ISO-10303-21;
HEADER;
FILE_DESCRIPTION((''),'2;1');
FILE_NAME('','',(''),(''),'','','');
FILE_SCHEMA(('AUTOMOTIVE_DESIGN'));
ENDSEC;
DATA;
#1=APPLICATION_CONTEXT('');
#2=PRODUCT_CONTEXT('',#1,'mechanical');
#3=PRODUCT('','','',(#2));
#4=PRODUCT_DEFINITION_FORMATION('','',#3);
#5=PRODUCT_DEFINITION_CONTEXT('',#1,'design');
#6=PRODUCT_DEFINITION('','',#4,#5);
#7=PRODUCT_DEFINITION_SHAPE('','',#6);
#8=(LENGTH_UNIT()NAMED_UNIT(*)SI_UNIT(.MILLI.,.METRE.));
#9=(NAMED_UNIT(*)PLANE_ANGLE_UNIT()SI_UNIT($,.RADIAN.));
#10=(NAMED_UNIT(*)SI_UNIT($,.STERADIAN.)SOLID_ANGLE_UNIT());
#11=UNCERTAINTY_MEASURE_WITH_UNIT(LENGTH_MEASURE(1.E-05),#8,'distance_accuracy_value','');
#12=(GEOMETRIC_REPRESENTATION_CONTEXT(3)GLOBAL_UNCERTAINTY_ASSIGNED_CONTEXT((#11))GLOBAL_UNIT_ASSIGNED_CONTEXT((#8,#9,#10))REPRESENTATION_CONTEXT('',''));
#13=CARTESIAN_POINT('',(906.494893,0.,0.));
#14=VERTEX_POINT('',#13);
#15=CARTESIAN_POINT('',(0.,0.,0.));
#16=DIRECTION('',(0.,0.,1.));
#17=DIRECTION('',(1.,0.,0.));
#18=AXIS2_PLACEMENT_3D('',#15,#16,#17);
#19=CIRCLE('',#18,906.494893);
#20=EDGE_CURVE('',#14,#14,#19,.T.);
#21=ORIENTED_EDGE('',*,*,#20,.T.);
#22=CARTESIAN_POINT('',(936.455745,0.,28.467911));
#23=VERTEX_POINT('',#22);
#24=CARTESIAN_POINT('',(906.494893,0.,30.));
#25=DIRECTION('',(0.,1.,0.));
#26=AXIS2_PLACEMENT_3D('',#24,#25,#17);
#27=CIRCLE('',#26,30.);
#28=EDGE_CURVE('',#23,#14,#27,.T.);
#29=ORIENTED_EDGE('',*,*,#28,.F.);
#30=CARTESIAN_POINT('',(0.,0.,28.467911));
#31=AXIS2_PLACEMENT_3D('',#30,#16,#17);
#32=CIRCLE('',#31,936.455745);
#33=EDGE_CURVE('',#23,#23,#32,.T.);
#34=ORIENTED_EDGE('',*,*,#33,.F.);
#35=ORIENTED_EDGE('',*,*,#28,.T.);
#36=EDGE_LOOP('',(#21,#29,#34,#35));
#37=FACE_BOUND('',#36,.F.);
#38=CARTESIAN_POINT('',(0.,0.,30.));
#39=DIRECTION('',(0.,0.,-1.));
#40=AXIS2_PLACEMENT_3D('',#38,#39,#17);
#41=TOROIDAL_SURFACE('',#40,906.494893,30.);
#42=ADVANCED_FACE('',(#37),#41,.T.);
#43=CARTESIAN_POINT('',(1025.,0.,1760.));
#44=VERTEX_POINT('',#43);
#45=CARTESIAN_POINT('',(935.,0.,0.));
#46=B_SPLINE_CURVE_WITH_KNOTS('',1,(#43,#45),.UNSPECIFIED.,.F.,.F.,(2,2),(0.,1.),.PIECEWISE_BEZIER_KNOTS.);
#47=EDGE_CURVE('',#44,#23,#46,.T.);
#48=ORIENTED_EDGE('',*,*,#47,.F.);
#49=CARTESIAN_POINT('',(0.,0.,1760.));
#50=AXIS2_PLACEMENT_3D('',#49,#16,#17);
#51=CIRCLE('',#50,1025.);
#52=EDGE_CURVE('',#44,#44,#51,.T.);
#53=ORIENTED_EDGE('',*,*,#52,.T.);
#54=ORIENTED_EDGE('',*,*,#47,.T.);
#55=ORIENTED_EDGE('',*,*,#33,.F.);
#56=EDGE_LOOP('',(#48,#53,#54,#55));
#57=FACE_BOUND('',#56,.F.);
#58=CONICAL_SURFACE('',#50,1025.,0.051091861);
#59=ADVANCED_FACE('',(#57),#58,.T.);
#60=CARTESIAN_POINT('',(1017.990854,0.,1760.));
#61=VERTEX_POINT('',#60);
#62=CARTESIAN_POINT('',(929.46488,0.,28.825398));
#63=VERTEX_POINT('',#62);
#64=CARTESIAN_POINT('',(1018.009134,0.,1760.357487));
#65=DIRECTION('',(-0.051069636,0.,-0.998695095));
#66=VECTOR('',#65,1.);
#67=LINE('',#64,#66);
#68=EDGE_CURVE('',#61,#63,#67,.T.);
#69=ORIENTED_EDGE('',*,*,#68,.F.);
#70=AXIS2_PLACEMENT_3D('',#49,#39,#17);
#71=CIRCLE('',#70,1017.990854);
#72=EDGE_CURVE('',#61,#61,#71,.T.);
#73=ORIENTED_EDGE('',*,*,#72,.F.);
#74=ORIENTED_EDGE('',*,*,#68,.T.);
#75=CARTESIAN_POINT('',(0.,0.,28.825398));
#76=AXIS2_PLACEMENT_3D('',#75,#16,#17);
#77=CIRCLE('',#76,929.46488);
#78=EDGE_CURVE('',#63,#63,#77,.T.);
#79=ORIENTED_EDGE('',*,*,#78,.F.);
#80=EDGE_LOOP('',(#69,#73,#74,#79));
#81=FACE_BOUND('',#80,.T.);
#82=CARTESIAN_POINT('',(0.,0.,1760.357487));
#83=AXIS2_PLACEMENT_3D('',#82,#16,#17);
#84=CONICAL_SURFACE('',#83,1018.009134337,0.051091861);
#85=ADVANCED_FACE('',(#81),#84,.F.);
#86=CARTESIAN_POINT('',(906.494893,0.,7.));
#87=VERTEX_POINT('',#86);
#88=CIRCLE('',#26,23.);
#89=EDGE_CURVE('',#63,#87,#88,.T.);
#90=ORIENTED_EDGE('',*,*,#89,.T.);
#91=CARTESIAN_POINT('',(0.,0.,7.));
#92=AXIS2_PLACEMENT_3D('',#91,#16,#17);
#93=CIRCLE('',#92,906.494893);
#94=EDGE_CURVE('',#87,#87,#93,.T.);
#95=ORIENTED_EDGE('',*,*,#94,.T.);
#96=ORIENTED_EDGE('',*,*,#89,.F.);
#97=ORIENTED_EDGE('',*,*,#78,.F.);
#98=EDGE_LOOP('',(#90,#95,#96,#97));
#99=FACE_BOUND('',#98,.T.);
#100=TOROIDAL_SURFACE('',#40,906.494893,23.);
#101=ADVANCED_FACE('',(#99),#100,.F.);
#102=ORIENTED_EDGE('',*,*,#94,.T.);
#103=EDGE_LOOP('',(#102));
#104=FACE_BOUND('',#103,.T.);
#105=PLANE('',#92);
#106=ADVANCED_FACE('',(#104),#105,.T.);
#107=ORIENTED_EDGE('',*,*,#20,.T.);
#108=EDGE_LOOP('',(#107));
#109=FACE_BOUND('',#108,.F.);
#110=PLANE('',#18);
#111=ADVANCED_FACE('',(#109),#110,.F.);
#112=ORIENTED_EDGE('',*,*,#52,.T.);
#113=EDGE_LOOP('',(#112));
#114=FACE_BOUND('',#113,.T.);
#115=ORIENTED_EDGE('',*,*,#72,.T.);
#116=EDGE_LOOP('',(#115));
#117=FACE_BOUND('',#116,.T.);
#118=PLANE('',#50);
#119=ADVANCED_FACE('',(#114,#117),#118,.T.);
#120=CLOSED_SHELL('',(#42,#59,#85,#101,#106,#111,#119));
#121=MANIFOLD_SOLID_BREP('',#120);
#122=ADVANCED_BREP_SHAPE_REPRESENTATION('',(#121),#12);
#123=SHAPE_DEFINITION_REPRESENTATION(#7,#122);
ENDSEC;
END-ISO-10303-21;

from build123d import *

# Parameters (mm, degrees)
F2_R = 1025
F0_R = 935
F4_R = 30
F5_T = -7


with BuildPart() as f3:
    # F2 (on offset) → F3 section 0
    with BuildSketch(Plane.XY.offset(1760)):
        Circle(F2_R)
    # F0 (on Top) → F3 section 1
    with BuildSketch(Plane.XY):
        Circle(F0_R)
    loft()

    # F4
    f4_edges = [f3.edges().sort_by_distance(p)[0] for p in [
        (-935, 0, 0),
    ]]
    fillet(f4_edges, radius=F4_R)

    # F5
    f5_openings = [f3.faces().sort_by_distance(p)[0] for p in [
        (0, 0, 1760),
    ]]
    offset(amount=F5_T, openings=f5_openings, kind=Kind.INTERSECTION)


solid = f3.part
